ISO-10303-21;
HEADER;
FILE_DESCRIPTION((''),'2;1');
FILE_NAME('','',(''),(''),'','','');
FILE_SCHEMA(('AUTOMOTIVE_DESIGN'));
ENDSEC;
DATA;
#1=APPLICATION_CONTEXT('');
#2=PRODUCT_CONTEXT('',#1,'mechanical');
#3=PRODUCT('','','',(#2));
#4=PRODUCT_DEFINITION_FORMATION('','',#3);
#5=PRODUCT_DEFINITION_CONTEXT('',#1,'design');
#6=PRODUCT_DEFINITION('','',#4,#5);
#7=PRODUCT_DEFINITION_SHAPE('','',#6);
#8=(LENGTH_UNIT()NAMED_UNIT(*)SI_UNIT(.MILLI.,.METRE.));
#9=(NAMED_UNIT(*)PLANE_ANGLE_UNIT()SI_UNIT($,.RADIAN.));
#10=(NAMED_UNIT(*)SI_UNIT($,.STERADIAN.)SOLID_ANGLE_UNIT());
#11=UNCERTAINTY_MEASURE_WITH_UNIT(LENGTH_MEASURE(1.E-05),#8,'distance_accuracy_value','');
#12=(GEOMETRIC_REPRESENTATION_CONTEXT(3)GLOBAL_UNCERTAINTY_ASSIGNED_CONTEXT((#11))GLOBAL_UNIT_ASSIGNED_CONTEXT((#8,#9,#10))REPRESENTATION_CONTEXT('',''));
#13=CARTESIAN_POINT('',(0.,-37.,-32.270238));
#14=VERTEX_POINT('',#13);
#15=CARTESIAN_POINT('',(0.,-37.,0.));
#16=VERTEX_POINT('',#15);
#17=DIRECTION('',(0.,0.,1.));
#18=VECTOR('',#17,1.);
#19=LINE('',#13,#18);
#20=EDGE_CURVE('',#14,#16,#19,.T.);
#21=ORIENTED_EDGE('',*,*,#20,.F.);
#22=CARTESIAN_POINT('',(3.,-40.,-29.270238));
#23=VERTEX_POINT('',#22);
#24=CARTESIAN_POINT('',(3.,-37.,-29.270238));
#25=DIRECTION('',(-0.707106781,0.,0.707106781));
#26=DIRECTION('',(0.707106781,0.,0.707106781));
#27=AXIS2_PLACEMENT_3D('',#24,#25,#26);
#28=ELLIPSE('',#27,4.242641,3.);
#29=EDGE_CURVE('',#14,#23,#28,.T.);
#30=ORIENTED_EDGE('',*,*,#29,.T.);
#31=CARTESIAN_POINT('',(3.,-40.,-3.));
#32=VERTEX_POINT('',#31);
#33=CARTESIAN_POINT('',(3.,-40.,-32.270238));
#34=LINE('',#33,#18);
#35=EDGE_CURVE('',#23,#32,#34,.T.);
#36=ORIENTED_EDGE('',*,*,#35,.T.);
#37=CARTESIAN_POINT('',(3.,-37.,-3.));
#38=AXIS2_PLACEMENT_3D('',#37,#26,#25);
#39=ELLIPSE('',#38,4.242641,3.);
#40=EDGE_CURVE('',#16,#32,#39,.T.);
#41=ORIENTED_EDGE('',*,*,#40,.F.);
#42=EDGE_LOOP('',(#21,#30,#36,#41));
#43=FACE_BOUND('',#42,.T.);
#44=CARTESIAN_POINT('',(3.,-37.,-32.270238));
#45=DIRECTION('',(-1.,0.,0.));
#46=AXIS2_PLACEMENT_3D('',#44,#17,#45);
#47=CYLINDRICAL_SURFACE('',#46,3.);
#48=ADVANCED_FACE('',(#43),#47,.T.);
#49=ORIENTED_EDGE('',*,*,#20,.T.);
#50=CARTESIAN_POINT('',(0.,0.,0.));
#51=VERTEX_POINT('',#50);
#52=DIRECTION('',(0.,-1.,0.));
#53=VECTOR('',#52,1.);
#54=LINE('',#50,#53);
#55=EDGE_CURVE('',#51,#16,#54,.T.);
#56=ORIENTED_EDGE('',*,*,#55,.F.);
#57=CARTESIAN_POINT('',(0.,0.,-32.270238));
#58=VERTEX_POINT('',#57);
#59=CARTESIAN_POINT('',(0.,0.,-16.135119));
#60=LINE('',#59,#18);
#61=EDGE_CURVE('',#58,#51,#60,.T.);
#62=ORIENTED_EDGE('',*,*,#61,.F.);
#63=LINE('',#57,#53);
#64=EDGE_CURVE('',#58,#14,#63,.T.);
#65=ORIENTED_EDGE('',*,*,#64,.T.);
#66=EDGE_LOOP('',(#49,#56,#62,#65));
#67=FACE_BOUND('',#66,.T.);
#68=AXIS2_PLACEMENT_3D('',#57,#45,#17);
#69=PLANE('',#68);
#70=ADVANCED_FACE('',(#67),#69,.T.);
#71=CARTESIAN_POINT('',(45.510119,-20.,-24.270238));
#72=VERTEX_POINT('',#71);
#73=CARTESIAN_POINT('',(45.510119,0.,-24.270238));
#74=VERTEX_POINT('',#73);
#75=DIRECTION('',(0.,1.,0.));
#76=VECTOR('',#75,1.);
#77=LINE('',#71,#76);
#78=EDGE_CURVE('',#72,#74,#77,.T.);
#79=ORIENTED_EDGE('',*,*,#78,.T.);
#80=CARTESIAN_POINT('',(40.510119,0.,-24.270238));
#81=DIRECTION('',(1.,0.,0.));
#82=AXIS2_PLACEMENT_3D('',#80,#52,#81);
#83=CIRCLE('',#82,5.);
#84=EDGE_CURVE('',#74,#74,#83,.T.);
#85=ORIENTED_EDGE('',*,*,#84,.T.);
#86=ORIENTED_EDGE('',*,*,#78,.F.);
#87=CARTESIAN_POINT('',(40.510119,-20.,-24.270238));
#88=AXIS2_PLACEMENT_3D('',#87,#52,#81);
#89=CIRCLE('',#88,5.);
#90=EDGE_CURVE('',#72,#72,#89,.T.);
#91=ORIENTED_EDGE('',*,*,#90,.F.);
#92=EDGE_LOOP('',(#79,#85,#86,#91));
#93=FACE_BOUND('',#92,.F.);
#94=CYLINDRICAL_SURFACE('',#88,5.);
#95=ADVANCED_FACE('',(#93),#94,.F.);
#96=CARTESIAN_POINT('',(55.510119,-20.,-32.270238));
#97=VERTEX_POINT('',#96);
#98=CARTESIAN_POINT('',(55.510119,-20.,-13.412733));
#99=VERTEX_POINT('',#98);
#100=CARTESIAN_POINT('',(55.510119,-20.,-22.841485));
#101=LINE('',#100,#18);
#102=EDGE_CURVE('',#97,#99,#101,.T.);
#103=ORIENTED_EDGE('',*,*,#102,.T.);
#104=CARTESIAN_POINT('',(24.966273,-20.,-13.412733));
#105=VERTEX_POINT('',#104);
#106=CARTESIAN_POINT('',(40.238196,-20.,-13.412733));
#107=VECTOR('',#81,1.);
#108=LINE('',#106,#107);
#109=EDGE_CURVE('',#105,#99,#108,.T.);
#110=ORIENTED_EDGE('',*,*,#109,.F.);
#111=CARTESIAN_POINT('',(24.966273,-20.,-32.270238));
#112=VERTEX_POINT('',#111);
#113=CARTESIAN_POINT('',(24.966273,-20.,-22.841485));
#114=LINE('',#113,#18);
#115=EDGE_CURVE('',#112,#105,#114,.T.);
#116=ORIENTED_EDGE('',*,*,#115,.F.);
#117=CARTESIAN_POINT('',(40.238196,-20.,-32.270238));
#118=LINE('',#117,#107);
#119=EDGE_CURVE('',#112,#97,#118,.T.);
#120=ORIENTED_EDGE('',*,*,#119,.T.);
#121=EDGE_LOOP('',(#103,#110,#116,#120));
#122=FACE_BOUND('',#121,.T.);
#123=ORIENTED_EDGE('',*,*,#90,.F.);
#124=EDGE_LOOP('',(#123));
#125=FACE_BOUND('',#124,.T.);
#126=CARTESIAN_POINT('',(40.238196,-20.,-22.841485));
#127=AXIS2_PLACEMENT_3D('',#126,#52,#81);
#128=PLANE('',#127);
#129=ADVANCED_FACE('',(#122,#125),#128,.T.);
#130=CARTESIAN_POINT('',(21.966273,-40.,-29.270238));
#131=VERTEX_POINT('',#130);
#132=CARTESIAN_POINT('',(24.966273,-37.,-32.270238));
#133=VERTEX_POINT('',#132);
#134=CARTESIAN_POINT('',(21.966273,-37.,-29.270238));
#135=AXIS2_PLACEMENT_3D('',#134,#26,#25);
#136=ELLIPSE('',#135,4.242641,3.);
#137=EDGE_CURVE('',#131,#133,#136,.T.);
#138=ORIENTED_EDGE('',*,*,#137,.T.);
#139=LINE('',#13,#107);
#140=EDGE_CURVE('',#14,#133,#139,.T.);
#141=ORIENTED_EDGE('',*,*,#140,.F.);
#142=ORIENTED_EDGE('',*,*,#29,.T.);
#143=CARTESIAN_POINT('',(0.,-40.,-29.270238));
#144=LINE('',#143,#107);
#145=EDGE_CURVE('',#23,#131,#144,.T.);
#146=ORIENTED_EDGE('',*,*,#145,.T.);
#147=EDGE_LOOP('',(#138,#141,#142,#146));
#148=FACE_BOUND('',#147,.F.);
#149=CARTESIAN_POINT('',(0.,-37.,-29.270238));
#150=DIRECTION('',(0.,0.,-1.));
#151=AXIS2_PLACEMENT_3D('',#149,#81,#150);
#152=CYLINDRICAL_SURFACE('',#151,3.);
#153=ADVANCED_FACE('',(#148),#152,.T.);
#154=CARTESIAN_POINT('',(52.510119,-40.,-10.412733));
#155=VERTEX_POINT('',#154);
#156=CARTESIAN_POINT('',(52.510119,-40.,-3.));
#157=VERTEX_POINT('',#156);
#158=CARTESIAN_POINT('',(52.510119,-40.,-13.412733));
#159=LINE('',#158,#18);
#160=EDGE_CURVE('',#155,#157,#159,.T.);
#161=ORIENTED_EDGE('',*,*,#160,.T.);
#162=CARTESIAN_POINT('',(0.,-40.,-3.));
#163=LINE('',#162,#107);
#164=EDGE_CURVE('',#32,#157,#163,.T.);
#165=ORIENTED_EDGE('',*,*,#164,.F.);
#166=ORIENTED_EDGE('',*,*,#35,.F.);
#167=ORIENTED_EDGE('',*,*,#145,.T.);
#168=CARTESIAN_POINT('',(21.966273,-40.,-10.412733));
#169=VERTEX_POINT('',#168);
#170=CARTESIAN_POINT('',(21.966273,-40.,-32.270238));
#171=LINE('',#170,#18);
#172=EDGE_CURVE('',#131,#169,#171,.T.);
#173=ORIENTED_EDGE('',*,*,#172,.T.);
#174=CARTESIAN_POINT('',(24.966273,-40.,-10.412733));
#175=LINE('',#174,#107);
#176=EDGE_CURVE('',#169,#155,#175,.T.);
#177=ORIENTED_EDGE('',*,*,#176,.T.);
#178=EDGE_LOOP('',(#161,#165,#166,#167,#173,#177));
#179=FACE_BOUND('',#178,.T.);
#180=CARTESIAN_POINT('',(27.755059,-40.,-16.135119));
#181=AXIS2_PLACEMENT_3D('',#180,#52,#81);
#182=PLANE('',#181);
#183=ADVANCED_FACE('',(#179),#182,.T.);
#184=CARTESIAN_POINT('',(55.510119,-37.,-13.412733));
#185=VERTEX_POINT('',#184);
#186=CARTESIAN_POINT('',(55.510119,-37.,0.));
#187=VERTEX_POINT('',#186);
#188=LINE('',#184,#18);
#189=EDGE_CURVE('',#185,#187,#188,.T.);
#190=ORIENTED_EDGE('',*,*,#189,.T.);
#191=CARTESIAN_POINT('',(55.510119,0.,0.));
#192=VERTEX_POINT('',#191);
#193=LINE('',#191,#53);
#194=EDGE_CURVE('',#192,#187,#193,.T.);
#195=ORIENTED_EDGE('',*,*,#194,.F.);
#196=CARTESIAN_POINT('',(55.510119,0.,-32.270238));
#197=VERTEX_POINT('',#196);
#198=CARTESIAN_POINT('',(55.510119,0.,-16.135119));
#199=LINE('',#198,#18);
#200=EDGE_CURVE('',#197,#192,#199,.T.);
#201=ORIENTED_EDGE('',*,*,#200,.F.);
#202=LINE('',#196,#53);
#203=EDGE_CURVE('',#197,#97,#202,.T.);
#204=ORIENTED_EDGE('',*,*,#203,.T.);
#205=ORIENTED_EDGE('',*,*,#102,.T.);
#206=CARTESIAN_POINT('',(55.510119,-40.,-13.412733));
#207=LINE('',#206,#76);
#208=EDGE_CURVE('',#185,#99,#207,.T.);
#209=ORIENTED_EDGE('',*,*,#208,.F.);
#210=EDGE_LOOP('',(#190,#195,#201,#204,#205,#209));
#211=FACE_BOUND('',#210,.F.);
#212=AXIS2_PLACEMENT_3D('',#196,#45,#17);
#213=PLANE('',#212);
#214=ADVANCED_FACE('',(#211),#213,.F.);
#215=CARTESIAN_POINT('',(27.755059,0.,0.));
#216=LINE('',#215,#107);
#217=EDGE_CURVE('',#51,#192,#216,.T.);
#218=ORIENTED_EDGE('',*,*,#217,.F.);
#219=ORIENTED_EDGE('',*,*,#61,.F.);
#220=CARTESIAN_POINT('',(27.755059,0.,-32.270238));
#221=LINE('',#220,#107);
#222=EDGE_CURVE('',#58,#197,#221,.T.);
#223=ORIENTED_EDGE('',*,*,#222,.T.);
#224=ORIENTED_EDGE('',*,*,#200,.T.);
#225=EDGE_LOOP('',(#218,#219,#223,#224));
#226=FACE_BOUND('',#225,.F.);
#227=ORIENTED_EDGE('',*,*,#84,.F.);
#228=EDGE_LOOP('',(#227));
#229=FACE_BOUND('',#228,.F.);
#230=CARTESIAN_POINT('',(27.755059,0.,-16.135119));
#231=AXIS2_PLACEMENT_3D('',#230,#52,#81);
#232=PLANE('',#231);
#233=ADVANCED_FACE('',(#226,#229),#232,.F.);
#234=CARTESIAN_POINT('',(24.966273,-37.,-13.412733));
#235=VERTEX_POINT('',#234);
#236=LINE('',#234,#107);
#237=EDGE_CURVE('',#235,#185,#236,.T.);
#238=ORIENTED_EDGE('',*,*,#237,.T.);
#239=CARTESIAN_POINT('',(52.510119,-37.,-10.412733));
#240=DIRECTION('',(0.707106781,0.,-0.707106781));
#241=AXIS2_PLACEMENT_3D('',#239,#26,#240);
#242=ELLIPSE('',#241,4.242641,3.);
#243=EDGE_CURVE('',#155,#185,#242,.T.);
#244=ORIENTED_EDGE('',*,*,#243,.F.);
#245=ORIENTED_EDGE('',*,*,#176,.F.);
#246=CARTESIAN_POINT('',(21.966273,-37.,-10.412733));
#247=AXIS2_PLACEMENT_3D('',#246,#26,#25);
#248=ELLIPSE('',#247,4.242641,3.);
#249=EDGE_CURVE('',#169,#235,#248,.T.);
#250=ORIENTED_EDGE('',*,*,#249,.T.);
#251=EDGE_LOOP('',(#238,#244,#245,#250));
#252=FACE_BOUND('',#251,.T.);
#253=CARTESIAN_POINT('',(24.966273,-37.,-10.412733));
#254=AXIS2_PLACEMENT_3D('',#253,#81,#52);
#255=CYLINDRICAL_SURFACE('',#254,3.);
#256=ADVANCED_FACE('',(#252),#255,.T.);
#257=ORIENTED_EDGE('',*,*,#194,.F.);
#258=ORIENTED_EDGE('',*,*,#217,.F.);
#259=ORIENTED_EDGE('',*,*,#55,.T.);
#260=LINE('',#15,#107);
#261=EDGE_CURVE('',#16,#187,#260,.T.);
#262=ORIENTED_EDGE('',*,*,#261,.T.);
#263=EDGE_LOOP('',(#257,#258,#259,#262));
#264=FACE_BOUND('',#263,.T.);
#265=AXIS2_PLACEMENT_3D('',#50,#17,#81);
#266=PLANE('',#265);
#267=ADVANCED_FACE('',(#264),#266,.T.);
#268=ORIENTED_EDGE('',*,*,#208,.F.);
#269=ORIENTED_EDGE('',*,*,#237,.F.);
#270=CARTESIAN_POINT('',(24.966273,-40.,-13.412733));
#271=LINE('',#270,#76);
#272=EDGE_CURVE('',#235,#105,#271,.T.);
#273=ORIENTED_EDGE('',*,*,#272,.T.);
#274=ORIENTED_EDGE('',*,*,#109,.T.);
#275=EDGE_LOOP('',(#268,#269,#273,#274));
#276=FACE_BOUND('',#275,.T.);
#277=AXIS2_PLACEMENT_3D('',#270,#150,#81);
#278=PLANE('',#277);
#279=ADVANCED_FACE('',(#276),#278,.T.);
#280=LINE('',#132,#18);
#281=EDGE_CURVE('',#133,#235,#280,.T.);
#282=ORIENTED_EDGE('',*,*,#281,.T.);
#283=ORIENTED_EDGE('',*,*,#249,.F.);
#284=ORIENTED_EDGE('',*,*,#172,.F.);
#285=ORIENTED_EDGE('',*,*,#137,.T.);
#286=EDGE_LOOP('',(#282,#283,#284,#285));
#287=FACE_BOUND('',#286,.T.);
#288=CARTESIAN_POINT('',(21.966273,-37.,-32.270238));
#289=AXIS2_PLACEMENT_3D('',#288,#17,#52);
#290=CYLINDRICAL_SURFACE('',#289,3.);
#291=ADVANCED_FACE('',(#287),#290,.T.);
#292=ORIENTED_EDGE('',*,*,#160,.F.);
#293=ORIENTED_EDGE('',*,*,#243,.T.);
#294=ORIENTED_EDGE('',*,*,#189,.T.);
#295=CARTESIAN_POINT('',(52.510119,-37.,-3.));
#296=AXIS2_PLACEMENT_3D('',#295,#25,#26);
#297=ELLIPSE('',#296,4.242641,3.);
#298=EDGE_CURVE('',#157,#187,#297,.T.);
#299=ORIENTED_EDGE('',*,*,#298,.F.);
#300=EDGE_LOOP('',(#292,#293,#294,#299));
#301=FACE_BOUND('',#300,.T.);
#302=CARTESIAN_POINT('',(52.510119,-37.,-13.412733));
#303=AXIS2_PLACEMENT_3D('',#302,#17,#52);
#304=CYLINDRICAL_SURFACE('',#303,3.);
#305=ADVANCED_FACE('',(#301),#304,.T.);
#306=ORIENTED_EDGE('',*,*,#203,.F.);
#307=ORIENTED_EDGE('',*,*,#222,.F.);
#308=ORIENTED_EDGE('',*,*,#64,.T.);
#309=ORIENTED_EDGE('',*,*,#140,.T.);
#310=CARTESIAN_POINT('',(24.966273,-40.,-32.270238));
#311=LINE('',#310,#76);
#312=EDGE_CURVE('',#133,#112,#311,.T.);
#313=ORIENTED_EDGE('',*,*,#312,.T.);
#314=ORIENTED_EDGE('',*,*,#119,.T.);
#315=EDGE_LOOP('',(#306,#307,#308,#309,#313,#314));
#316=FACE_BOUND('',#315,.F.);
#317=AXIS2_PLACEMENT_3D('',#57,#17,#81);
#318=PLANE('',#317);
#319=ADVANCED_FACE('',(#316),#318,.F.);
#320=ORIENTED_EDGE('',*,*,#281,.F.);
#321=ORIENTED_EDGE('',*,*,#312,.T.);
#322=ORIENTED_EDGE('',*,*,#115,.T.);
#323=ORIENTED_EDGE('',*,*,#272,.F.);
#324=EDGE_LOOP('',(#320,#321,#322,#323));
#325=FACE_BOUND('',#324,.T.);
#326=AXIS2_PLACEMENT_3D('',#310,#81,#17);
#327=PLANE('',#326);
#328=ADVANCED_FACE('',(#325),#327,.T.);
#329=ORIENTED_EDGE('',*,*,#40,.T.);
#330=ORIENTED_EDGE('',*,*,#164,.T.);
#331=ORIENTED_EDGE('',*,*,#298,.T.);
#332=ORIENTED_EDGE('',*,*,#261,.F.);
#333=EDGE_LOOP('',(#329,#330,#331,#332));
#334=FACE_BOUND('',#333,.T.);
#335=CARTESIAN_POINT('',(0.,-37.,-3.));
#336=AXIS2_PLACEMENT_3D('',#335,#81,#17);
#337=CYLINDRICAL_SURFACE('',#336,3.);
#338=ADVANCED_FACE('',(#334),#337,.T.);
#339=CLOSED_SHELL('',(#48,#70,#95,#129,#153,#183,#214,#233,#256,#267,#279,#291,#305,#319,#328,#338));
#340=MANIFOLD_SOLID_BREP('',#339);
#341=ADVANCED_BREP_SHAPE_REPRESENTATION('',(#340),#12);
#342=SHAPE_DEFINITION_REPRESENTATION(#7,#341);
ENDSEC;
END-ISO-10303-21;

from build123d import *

# Parameters (mm, degrees)
F0_W     = 55.5101186037
F0_H     = 32.2702378035
F1_DEPTH = 40
F2_W     = 30.5438451469
F2_H     = 18.8575051725
F3_DEPTH = 20
F4_R     = 5
F5_DEPTH = 20.001
F7_R     = 3


# Not quite as in the source:
# - a feature of the source that left no trace in its solid (it failed there, or was rolled back) is left out


with BuildPart() as f1:
    # F0 (on Front) → F1 (new body)
    with BuildSketch(Plane.XZ):
        with Locations((27.7550593019, -16.1351189017)):
            Rectangle(F0_W, F0_H)
    extrude(amount=F1_DEPTH)

    # F2 (on face) → F3 (cut)
    with BuildSketch(Plane.XZ.offset(40)):
        with Locations((40.2381960303, -22.8414852172)):
            Rectangle(F2_W, F2_H)
    extrude(amount=-F3_DEPTH, mode=Mode.SUBTRACT)

    # F4 (on face) → F5 (cut, through all)
    with BuildSketch(Plane.XZ.offset(20)):
        with Locations((40.5101186037, -24.2702378035)):
            Circle(F4_R)
    extrude(amount=-F5_DEPTH, mode=Mode.SUBTRACT)

    # F7
    f7_edges = [f1.edges().sort_by_distance(p)[0] for p in [
        (24.966273, -40, -22.841485),
        (0, -40, -16.135119),
        (12.483137, -40, -32.270238),
        (40.238196, -40, -13.412733),
        (55.510119, -40, -6.706366),
        (27.755059, -40, 0),
    ]]
    fillet(f7_edges, radius=F7_R)


solid = f1.part
